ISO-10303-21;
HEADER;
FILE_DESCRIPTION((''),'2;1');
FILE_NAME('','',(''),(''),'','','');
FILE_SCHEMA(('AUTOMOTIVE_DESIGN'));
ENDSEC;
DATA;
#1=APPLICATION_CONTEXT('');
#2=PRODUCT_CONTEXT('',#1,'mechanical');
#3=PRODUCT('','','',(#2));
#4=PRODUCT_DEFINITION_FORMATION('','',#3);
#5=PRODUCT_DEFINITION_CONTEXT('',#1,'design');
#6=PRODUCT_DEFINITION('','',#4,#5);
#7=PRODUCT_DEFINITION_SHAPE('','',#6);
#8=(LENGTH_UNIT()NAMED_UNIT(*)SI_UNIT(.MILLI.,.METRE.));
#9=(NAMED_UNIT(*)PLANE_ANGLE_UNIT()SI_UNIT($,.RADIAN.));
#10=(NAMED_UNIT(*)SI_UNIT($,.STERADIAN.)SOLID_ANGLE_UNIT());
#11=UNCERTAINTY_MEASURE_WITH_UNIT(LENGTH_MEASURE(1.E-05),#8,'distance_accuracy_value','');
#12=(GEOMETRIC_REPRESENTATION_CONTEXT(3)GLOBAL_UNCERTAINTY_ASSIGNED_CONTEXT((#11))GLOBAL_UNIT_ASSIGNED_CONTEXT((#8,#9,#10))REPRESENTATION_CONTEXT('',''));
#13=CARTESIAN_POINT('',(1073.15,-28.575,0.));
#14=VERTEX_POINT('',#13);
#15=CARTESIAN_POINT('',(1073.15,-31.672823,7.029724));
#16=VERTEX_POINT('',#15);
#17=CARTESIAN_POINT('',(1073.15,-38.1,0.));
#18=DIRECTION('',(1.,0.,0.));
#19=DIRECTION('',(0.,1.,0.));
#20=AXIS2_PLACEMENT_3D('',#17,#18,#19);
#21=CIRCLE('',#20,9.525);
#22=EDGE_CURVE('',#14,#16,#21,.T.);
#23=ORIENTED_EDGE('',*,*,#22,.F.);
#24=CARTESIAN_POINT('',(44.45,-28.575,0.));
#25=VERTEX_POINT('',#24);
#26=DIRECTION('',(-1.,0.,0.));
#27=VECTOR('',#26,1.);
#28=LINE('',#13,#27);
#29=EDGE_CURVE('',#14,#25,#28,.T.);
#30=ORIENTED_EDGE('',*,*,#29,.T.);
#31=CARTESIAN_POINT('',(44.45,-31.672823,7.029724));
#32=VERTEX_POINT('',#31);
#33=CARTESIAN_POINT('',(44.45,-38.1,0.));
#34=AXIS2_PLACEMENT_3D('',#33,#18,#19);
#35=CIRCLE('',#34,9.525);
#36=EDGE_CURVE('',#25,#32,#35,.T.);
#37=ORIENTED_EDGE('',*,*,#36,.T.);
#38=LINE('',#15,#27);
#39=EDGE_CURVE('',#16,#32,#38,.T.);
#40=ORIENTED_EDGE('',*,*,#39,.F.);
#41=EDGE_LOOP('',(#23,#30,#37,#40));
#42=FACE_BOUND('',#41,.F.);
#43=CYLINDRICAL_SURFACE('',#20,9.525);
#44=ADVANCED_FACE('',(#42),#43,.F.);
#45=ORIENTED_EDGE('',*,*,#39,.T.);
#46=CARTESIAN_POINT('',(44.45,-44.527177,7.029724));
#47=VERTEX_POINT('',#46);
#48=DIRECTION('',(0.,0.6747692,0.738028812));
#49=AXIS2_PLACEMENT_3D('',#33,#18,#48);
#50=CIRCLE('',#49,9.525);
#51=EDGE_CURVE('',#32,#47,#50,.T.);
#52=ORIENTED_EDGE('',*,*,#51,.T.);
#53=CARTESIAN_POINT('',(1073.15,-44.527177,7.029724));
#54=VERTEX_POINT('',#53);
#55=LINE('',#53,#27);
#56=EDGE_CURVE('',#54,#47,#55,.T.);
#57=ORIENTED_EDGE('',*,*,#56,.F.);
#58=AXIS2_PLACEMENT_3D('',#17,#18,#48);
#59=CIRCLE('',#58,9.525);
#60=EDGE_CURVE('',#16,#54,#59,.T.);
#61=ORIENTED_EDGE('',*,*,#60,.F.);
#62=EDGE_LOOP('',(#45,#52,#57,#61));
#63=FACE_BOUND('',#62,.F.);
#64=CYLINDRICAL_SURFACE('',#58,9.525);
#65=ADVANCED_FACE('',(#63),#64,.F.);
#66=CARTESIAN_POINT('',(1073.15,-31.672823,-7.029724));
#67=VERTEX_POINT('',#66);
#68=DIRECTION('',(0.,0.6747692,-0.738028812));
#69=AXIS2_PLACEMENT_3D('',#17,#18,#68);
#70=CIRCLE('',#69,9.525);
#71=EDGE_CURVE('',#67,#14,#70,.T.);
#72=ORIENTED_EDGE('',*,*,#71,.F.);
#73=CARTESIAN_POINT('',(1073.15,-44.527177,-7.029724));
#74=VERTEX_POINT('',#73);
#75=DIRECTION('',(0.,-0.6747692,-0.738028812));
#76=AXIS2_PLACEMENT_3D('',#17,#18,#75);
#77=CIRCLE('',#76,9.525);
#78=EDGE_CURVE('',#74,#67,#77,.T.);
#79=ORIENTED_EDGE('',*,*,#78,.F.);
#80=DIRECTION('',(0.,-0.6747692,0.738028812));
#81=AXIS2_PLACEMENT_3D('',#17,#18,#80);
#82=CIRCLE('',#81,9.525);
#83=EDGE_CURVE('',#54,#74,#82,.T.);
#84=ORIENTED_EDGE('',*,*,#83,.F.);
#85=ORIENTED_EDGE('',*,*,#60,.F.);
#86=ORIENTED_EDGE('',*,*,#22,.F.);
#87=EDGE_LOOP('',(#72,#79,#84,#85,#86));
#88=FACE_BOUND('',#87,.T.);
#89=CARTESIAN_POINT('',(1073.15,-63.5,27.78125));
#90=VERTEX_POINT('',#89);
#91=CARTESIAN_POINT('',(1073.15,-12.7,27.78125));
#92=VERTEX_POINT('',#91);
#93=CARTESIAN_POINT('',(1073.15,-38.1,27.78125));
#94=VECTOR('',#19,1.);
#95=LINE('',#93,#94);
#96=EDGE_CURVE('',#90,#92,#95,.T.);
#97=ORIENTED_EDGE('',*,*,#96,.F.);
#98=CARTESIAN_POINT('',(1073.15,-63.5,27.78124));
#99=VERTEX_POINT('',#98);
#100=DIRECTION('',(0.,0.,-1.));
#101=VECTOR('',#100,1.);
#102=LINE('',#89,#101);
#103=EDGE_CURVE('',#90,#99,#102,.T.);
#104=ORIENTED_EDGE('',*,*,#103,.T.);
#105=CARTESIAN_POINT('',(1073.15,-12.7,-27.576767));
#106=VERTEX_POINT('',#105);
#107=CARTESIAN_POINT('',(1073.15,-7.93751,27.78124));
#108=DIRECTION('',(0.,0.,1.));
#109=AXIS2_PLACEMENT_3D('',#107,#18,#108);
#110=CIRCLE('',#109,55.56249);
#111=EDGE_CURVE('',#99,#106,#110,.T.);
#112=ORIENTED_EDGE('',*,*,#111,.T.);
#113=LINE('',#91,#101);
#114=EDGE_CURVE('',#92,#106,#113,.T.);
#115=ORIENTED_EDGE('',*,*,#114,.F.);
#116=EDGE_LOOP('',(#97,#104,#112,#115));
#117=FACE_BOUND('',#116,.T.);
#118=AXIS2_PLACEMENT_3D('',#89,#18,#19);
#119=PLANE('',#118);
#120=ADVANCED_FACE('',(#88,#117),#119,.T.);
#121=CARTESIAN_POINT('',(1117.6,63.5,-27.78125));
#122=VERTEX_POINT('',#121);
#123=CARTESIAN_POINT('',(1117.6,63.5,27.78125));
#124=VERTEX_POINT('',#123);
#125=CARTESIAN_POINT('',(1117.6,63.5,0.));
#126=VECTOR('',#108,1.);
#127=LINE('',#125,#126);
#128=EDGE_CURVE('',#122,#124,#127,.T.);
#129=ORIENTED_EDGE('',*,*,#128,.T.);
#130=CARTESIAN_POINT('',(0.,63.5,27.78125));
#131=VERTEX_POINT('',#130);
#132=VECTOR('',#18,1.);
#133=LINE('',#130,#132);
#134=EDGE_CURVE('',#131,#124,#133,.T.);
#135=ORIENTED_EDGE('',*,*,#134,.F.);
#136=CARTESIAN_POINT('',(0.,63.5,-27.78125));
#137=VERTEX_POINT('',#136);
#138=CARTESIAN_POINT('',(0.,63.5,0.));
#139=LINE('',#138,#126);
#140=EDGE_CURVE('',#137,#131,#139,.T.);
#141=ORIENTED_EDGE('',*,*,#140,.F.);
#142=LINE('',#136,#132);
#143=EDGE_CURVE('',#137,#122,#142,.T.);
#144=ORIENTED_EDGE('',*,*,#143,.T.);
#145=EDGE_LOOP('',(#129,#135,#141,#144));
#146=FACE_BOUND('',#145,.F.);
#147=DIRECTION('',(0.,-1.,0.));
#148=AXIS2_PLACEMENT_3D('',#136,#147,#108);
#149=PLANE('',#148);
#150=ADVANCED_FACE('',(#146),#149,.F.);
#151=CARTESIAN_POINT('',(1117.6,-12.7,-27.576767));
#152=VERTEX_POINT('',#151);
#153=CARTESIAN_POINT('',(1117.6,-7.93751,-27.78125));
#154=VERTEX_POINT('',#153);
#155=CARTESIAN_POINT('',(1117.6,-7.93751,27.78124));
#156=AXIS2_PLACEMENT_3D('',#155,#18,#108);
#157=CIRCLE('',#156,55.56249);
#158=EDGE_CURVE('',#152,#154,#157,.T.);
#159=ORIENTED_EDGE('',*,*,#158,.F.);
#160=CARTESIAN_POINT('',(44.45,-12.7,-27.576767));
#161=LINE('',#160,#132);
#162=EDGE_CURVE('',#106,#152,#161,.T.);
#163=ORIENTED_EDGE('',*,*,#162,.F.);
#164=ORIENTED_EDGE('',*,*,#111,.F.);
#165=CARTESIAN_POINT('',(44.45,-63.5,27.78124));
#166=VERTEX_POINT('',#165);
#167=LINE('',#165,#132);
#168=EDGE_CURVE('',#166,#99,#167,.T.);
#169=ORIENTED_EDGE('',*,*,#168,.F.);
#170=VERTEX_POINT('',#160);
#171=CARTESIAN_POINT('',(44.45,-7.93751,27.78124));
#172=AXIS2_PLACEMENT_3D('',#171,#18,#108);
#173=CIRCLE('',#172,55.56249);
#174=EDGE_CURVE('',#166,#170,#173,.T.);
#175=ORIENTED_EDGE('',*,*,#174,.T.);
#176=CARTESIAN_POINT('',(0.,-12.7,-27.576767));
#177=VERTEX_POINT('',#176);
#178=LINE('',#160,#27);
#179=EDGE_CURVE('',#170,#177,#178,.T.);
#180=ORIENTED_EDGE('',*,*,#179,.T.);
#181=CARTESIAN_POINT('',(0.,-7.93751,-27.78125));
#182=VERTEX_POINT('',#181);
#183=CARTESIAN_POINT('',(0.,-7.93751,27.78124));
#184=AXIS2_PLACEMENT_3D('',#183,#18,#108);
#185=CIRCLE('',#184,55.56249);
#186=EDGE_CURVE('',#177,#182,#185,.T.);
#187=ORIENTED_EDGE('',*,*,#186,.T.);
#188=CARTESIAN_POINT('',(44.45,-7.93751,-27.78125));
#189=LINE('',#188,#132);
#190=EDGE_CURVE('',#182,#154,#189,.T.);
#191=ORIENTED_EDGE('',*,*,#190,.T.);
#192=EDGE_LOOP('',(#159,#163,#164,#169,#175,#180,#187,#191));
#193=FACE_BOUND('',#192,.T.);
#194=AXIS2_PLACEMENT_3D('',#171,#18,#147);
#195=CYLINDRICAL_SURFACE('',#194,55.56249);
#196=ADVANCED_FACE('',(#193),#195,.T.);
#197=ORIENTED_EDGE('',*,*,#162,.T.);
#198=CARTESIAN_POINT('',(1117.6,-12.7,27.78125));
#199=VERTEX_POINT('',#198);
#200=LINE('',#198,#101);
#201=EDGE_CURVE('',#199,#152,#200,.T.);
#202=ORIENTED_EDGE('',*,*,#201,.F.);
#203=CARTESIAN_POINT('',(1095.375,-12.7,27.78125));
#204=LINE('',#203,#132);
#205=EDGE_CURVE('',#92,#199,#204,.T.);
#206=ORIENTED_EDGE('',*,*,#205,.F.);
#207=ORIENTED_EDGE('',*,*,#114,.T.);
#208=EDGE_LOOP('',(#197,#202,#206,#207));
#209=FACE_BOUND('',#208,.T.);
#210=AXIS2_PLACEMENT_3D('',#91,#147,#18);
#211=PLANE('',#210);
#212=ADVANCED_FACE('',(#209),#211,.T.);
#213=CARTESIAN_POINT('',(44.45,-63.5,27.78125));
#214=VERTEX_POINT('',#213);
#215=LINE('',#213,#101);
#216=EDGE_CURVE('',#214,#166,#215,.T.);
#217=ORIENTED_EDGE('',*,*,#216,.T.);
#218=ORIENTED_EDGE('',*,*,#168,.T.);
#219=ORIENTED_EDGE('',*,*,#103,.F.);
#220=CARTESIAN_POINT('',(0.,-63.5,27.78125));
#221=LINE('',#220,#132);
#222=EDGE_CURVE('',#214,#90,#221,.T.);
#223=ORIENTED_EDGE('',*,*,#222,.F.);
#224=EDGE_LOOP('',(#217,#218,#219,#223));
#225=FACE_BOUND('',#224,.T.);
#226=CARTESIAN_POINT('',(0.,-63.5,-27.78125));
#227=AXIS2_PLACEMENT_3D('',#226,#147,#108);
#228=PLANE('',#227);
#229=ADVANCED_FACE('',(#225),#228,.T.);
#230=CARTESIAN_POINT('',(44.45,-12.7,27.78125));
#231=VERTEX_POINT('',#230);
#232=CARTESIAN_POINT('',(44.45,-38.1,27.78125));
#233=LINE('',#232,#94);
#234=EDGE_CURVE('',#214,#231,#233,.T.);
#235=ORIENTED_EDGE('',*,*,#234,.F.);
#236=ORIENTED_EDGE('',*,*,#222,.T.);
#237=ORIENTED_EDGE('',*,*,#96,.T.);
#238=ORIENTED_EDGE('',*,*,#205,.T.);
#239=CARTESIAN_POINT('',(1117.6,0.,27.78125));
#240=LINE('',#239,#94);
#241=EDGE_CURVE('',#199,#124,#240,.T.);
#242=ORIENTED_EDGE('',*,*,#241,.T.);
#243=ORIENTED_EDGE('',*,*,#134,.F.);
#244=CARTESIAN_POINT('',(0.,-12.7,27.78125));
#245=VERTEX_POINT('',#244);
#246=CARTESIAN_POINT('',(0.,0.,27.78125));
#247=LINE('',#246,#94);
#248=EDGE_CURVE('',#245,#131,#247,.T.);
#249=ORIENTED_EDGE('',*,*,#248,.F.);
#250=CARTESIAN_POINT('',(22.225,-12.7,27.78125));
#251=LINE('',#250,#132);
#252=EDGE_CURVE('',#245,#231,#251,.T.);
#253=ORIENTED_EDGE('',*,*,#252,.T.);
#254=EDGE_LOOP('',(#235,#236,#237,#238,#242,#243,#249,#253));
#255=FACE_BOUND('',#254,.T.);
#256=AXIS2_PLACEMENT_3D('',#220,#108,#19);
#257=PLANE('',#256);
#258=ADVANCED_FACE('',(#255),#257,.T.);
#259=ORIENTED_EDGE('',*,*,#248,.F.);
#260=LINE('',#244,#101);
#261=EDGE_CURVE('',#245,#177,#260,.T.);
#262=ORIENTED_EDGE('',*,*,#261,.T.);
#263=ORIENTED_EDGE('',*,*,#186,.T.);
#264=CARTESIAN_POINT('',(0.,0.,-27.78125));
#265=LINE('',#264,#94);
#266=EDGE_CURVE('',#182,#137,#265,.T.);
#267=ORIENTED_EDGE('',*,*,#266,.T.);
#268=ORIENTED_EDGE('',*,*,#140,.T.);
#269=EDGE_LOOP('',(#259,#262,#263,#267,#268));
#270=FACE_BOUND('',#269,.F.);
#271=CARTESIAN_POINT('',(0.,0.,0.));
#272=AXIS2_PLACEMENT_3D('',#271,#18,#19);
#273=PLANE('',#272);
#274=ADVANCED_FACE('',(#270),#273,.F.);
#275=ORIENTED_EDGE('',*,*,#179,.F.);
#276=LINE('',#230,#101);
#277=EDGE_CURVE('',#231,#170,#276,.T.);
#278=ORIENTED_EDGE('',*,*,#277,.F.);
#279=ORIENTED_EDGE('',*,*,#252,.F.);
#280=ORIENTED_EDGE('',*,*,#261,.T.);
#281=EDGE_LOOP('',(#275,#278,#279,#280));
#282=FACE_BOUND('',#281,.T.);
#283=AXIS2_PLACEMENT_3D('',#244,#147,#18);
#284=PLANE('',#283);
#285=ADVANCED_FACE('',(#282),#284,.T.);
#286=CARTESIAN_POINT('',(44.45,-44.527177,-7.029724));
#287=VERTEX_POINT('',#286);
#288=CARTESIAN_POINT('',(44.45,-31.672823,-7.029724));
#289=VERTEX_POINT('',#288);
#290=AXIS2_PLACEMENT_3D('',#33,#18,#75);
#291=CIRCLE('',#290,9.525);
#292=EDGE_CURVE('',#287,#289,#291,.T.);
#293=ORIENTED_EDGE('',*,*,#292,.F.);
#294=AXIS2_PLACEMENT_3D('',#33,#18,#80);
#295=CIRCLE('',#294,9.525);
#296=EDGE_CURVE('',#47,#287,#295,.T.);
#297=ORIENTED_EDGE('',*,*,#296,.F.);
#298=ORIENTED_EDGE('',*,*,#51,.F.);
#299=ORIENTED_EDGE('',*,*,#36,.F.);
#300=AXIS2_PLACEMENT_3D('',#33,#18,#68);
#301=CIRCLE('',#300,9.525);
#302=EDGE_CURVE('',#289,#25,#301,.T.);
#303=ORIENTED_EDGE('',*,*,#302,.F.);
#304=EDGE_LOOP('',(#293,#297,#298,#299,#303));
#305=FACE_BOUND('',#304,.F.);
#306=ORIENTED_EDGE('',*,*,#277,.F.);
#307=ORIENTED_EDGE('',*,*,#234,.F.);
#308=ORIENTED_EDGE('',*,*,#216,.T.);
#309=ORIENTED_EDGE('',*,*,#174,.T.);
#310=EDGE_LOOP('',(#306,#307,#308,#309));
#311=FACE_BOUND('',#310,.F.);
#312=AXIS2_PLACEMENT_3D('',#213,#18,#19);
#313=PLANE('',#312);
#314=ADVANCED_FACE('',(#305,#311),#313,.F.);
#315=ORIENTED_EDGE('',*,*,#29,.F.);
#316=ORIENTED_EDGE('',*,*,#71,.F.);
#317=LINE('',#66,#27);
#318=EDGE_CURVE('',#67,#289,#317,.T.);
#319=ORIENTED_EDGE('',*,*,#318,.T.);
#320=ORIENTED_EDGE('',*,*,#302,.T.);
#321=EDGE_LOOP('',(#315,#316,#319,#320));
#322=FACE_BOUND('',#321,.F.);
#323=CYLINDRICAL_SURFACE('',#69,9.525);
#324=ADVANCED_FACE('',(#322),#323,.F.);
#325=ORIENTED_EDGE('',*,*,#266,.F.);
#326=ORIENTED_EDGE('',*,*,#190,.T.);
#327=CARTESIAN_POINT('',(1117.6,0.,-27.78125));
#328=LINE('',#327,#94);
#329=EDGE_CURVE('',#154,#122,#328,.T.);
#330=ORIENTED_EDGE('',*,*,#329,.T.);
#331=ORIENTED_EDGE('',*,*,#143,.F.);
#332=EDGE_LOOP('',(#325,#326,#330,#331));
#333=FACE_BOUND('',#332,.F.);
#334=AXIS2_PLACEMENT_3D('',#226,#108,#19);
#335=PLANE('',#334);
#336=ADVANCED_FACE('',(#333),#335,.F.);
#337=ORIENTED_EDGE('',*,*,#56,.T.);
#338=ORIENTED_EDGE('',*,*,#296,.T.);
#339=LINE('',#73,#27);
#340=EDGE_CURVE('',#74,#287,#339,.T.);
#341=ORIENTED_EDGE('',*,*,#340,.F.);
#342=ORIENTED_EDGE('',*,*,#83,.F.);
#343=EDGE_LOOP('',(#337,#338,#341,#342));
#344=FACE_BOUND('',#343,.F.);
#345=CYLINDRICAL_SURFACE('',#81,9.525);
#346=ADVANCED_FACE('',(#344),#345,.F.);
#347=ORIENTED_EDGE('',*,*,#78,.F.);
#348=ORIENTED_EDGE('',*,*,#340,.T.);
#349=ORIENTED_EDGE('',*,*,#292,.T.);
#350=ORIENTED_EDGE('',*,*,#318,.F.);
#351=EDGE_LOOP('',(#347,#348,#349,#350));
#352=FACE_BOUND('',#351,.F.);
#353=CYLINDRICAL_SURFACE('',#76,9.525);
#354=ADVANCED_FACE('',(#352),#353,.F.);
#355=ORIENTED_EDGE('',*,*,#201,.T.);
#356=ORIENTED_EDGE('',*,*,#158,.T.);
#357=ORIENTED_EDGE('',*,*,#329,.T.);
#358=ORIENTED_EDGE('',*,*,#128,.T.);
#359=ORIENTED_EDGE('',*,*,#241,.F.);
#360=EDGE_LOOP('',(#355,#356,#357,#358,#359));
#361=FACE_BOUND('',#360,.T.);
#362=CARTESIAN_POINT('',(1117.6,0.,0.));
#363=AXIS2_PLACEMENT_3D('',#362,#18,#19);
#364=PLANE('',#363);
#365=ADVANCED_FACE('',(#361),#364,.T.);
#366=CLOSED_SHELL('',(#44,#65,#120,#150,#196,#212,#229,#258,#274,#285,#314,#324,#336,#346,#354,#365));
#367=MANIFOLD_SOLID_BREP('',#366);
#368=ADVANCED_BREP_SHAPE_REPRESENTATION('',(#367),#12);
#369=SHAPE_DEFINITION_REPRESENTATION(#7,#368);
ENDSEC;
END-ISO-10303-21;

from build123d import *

# Parameters (mm, degrees)
F0_W     = 127
F0_H     = 55.5625
F1_DEPTH = 1117.6
F2_W     = 44.45
F2_H     = 50.8
F3_DEPTH = 55.5635
F5_DEPTH = 1073.151
F6_R     = 55.56249


# Not quite as in the source:
# - a fillet or chamfer is up to 0.001 mm smaller than in the source, because OpenCascade refuses the exact size


with BuildPart() as f1:
    # F0 (on Right) → F1 (new body)
    with BuildSketch(Plane.YZ):
        Rectangle(F0_W, F0_H)
    extrude(amount=F1_DEPTH)

    # F2 (on face) → F3 (cut, through all)
    with BuildSketch(Plane.XY.offset(27.78125)):
        with Locations((22.225, -38.1)):
            Rectangle(F2_W, F2_H)
        with Locations((1095.375, -38.1)):
            Rectangle(F2_W, F2_H)
    extrude(amount=-F3_DEPTH, mode=Mode.SUBTRACT)

    # F4 (on face) → F5 (cut, through all)
    with BuildSketch(Plane.YZ.offset(1073.15)):
        with BuildLine():
            Line((-38.1, 0), (-44.5271766257, -7.0297244343))
            ThreePointArc((-44.5271766257, -7.0297244343), (-38.1, -9.525), (-31.6728233743, -7.0297244343))
            Line((-31.6728233743, -7.0297244343), (-38.1, 0))
        make_face()
        with BuildLine():
            ThreePointArc((-44.5271766257, 7.0297244343), (-47.625, 0), (-44.5271766257, -7.0297244343))
            Line((-44.5271766257, -7.0297244343), (-38.1, 0))
            Line((-38.1, 0), (-44.5271766257, 7.0297244343))
        make_face()
        with BuildLine():
            Line((-44.5271766257, 7.0297244343), (-38.1, 0))
            Line((-38.1, 0), (-31.6728233743, 7.0297244343))
            ThreePointArc((-31.6728233743, 7.0297244343), (-38.1, 9.525), (-44.5271766257, 7.0297244343))
        make_face()
        with BuildLine():
            Line((-31.6728233743, 7.0297244343), (-38.1, 0))
            Line((-38.1, 0), (-31.6728233743, -7.0297244343))
            ThreePointArc((-31.6728233743, -7.0297244343), (-29.3837943359, -3.8410133845), (-28.575, 0))
            ThreePointArc((-28.575, 0), (-29.3837943359, 3.8410133845), (-31.6728233743, 7.0297244343))
        make_face()
    extrude(amount=-F5_DEPTH, mode=Mode.SUBTRACT)

    # F6 (radius 55.5625 in the source; OpenCascade refuses exactly that, so slightly less here)
    f6_edges = [f1.edges().sort_by_distance(p)[0] for p in [
        (558.8, -63.5, -27.78125),
    ]]
    fillet(f6_edges, radius=F6_R)


solid = f1.part
